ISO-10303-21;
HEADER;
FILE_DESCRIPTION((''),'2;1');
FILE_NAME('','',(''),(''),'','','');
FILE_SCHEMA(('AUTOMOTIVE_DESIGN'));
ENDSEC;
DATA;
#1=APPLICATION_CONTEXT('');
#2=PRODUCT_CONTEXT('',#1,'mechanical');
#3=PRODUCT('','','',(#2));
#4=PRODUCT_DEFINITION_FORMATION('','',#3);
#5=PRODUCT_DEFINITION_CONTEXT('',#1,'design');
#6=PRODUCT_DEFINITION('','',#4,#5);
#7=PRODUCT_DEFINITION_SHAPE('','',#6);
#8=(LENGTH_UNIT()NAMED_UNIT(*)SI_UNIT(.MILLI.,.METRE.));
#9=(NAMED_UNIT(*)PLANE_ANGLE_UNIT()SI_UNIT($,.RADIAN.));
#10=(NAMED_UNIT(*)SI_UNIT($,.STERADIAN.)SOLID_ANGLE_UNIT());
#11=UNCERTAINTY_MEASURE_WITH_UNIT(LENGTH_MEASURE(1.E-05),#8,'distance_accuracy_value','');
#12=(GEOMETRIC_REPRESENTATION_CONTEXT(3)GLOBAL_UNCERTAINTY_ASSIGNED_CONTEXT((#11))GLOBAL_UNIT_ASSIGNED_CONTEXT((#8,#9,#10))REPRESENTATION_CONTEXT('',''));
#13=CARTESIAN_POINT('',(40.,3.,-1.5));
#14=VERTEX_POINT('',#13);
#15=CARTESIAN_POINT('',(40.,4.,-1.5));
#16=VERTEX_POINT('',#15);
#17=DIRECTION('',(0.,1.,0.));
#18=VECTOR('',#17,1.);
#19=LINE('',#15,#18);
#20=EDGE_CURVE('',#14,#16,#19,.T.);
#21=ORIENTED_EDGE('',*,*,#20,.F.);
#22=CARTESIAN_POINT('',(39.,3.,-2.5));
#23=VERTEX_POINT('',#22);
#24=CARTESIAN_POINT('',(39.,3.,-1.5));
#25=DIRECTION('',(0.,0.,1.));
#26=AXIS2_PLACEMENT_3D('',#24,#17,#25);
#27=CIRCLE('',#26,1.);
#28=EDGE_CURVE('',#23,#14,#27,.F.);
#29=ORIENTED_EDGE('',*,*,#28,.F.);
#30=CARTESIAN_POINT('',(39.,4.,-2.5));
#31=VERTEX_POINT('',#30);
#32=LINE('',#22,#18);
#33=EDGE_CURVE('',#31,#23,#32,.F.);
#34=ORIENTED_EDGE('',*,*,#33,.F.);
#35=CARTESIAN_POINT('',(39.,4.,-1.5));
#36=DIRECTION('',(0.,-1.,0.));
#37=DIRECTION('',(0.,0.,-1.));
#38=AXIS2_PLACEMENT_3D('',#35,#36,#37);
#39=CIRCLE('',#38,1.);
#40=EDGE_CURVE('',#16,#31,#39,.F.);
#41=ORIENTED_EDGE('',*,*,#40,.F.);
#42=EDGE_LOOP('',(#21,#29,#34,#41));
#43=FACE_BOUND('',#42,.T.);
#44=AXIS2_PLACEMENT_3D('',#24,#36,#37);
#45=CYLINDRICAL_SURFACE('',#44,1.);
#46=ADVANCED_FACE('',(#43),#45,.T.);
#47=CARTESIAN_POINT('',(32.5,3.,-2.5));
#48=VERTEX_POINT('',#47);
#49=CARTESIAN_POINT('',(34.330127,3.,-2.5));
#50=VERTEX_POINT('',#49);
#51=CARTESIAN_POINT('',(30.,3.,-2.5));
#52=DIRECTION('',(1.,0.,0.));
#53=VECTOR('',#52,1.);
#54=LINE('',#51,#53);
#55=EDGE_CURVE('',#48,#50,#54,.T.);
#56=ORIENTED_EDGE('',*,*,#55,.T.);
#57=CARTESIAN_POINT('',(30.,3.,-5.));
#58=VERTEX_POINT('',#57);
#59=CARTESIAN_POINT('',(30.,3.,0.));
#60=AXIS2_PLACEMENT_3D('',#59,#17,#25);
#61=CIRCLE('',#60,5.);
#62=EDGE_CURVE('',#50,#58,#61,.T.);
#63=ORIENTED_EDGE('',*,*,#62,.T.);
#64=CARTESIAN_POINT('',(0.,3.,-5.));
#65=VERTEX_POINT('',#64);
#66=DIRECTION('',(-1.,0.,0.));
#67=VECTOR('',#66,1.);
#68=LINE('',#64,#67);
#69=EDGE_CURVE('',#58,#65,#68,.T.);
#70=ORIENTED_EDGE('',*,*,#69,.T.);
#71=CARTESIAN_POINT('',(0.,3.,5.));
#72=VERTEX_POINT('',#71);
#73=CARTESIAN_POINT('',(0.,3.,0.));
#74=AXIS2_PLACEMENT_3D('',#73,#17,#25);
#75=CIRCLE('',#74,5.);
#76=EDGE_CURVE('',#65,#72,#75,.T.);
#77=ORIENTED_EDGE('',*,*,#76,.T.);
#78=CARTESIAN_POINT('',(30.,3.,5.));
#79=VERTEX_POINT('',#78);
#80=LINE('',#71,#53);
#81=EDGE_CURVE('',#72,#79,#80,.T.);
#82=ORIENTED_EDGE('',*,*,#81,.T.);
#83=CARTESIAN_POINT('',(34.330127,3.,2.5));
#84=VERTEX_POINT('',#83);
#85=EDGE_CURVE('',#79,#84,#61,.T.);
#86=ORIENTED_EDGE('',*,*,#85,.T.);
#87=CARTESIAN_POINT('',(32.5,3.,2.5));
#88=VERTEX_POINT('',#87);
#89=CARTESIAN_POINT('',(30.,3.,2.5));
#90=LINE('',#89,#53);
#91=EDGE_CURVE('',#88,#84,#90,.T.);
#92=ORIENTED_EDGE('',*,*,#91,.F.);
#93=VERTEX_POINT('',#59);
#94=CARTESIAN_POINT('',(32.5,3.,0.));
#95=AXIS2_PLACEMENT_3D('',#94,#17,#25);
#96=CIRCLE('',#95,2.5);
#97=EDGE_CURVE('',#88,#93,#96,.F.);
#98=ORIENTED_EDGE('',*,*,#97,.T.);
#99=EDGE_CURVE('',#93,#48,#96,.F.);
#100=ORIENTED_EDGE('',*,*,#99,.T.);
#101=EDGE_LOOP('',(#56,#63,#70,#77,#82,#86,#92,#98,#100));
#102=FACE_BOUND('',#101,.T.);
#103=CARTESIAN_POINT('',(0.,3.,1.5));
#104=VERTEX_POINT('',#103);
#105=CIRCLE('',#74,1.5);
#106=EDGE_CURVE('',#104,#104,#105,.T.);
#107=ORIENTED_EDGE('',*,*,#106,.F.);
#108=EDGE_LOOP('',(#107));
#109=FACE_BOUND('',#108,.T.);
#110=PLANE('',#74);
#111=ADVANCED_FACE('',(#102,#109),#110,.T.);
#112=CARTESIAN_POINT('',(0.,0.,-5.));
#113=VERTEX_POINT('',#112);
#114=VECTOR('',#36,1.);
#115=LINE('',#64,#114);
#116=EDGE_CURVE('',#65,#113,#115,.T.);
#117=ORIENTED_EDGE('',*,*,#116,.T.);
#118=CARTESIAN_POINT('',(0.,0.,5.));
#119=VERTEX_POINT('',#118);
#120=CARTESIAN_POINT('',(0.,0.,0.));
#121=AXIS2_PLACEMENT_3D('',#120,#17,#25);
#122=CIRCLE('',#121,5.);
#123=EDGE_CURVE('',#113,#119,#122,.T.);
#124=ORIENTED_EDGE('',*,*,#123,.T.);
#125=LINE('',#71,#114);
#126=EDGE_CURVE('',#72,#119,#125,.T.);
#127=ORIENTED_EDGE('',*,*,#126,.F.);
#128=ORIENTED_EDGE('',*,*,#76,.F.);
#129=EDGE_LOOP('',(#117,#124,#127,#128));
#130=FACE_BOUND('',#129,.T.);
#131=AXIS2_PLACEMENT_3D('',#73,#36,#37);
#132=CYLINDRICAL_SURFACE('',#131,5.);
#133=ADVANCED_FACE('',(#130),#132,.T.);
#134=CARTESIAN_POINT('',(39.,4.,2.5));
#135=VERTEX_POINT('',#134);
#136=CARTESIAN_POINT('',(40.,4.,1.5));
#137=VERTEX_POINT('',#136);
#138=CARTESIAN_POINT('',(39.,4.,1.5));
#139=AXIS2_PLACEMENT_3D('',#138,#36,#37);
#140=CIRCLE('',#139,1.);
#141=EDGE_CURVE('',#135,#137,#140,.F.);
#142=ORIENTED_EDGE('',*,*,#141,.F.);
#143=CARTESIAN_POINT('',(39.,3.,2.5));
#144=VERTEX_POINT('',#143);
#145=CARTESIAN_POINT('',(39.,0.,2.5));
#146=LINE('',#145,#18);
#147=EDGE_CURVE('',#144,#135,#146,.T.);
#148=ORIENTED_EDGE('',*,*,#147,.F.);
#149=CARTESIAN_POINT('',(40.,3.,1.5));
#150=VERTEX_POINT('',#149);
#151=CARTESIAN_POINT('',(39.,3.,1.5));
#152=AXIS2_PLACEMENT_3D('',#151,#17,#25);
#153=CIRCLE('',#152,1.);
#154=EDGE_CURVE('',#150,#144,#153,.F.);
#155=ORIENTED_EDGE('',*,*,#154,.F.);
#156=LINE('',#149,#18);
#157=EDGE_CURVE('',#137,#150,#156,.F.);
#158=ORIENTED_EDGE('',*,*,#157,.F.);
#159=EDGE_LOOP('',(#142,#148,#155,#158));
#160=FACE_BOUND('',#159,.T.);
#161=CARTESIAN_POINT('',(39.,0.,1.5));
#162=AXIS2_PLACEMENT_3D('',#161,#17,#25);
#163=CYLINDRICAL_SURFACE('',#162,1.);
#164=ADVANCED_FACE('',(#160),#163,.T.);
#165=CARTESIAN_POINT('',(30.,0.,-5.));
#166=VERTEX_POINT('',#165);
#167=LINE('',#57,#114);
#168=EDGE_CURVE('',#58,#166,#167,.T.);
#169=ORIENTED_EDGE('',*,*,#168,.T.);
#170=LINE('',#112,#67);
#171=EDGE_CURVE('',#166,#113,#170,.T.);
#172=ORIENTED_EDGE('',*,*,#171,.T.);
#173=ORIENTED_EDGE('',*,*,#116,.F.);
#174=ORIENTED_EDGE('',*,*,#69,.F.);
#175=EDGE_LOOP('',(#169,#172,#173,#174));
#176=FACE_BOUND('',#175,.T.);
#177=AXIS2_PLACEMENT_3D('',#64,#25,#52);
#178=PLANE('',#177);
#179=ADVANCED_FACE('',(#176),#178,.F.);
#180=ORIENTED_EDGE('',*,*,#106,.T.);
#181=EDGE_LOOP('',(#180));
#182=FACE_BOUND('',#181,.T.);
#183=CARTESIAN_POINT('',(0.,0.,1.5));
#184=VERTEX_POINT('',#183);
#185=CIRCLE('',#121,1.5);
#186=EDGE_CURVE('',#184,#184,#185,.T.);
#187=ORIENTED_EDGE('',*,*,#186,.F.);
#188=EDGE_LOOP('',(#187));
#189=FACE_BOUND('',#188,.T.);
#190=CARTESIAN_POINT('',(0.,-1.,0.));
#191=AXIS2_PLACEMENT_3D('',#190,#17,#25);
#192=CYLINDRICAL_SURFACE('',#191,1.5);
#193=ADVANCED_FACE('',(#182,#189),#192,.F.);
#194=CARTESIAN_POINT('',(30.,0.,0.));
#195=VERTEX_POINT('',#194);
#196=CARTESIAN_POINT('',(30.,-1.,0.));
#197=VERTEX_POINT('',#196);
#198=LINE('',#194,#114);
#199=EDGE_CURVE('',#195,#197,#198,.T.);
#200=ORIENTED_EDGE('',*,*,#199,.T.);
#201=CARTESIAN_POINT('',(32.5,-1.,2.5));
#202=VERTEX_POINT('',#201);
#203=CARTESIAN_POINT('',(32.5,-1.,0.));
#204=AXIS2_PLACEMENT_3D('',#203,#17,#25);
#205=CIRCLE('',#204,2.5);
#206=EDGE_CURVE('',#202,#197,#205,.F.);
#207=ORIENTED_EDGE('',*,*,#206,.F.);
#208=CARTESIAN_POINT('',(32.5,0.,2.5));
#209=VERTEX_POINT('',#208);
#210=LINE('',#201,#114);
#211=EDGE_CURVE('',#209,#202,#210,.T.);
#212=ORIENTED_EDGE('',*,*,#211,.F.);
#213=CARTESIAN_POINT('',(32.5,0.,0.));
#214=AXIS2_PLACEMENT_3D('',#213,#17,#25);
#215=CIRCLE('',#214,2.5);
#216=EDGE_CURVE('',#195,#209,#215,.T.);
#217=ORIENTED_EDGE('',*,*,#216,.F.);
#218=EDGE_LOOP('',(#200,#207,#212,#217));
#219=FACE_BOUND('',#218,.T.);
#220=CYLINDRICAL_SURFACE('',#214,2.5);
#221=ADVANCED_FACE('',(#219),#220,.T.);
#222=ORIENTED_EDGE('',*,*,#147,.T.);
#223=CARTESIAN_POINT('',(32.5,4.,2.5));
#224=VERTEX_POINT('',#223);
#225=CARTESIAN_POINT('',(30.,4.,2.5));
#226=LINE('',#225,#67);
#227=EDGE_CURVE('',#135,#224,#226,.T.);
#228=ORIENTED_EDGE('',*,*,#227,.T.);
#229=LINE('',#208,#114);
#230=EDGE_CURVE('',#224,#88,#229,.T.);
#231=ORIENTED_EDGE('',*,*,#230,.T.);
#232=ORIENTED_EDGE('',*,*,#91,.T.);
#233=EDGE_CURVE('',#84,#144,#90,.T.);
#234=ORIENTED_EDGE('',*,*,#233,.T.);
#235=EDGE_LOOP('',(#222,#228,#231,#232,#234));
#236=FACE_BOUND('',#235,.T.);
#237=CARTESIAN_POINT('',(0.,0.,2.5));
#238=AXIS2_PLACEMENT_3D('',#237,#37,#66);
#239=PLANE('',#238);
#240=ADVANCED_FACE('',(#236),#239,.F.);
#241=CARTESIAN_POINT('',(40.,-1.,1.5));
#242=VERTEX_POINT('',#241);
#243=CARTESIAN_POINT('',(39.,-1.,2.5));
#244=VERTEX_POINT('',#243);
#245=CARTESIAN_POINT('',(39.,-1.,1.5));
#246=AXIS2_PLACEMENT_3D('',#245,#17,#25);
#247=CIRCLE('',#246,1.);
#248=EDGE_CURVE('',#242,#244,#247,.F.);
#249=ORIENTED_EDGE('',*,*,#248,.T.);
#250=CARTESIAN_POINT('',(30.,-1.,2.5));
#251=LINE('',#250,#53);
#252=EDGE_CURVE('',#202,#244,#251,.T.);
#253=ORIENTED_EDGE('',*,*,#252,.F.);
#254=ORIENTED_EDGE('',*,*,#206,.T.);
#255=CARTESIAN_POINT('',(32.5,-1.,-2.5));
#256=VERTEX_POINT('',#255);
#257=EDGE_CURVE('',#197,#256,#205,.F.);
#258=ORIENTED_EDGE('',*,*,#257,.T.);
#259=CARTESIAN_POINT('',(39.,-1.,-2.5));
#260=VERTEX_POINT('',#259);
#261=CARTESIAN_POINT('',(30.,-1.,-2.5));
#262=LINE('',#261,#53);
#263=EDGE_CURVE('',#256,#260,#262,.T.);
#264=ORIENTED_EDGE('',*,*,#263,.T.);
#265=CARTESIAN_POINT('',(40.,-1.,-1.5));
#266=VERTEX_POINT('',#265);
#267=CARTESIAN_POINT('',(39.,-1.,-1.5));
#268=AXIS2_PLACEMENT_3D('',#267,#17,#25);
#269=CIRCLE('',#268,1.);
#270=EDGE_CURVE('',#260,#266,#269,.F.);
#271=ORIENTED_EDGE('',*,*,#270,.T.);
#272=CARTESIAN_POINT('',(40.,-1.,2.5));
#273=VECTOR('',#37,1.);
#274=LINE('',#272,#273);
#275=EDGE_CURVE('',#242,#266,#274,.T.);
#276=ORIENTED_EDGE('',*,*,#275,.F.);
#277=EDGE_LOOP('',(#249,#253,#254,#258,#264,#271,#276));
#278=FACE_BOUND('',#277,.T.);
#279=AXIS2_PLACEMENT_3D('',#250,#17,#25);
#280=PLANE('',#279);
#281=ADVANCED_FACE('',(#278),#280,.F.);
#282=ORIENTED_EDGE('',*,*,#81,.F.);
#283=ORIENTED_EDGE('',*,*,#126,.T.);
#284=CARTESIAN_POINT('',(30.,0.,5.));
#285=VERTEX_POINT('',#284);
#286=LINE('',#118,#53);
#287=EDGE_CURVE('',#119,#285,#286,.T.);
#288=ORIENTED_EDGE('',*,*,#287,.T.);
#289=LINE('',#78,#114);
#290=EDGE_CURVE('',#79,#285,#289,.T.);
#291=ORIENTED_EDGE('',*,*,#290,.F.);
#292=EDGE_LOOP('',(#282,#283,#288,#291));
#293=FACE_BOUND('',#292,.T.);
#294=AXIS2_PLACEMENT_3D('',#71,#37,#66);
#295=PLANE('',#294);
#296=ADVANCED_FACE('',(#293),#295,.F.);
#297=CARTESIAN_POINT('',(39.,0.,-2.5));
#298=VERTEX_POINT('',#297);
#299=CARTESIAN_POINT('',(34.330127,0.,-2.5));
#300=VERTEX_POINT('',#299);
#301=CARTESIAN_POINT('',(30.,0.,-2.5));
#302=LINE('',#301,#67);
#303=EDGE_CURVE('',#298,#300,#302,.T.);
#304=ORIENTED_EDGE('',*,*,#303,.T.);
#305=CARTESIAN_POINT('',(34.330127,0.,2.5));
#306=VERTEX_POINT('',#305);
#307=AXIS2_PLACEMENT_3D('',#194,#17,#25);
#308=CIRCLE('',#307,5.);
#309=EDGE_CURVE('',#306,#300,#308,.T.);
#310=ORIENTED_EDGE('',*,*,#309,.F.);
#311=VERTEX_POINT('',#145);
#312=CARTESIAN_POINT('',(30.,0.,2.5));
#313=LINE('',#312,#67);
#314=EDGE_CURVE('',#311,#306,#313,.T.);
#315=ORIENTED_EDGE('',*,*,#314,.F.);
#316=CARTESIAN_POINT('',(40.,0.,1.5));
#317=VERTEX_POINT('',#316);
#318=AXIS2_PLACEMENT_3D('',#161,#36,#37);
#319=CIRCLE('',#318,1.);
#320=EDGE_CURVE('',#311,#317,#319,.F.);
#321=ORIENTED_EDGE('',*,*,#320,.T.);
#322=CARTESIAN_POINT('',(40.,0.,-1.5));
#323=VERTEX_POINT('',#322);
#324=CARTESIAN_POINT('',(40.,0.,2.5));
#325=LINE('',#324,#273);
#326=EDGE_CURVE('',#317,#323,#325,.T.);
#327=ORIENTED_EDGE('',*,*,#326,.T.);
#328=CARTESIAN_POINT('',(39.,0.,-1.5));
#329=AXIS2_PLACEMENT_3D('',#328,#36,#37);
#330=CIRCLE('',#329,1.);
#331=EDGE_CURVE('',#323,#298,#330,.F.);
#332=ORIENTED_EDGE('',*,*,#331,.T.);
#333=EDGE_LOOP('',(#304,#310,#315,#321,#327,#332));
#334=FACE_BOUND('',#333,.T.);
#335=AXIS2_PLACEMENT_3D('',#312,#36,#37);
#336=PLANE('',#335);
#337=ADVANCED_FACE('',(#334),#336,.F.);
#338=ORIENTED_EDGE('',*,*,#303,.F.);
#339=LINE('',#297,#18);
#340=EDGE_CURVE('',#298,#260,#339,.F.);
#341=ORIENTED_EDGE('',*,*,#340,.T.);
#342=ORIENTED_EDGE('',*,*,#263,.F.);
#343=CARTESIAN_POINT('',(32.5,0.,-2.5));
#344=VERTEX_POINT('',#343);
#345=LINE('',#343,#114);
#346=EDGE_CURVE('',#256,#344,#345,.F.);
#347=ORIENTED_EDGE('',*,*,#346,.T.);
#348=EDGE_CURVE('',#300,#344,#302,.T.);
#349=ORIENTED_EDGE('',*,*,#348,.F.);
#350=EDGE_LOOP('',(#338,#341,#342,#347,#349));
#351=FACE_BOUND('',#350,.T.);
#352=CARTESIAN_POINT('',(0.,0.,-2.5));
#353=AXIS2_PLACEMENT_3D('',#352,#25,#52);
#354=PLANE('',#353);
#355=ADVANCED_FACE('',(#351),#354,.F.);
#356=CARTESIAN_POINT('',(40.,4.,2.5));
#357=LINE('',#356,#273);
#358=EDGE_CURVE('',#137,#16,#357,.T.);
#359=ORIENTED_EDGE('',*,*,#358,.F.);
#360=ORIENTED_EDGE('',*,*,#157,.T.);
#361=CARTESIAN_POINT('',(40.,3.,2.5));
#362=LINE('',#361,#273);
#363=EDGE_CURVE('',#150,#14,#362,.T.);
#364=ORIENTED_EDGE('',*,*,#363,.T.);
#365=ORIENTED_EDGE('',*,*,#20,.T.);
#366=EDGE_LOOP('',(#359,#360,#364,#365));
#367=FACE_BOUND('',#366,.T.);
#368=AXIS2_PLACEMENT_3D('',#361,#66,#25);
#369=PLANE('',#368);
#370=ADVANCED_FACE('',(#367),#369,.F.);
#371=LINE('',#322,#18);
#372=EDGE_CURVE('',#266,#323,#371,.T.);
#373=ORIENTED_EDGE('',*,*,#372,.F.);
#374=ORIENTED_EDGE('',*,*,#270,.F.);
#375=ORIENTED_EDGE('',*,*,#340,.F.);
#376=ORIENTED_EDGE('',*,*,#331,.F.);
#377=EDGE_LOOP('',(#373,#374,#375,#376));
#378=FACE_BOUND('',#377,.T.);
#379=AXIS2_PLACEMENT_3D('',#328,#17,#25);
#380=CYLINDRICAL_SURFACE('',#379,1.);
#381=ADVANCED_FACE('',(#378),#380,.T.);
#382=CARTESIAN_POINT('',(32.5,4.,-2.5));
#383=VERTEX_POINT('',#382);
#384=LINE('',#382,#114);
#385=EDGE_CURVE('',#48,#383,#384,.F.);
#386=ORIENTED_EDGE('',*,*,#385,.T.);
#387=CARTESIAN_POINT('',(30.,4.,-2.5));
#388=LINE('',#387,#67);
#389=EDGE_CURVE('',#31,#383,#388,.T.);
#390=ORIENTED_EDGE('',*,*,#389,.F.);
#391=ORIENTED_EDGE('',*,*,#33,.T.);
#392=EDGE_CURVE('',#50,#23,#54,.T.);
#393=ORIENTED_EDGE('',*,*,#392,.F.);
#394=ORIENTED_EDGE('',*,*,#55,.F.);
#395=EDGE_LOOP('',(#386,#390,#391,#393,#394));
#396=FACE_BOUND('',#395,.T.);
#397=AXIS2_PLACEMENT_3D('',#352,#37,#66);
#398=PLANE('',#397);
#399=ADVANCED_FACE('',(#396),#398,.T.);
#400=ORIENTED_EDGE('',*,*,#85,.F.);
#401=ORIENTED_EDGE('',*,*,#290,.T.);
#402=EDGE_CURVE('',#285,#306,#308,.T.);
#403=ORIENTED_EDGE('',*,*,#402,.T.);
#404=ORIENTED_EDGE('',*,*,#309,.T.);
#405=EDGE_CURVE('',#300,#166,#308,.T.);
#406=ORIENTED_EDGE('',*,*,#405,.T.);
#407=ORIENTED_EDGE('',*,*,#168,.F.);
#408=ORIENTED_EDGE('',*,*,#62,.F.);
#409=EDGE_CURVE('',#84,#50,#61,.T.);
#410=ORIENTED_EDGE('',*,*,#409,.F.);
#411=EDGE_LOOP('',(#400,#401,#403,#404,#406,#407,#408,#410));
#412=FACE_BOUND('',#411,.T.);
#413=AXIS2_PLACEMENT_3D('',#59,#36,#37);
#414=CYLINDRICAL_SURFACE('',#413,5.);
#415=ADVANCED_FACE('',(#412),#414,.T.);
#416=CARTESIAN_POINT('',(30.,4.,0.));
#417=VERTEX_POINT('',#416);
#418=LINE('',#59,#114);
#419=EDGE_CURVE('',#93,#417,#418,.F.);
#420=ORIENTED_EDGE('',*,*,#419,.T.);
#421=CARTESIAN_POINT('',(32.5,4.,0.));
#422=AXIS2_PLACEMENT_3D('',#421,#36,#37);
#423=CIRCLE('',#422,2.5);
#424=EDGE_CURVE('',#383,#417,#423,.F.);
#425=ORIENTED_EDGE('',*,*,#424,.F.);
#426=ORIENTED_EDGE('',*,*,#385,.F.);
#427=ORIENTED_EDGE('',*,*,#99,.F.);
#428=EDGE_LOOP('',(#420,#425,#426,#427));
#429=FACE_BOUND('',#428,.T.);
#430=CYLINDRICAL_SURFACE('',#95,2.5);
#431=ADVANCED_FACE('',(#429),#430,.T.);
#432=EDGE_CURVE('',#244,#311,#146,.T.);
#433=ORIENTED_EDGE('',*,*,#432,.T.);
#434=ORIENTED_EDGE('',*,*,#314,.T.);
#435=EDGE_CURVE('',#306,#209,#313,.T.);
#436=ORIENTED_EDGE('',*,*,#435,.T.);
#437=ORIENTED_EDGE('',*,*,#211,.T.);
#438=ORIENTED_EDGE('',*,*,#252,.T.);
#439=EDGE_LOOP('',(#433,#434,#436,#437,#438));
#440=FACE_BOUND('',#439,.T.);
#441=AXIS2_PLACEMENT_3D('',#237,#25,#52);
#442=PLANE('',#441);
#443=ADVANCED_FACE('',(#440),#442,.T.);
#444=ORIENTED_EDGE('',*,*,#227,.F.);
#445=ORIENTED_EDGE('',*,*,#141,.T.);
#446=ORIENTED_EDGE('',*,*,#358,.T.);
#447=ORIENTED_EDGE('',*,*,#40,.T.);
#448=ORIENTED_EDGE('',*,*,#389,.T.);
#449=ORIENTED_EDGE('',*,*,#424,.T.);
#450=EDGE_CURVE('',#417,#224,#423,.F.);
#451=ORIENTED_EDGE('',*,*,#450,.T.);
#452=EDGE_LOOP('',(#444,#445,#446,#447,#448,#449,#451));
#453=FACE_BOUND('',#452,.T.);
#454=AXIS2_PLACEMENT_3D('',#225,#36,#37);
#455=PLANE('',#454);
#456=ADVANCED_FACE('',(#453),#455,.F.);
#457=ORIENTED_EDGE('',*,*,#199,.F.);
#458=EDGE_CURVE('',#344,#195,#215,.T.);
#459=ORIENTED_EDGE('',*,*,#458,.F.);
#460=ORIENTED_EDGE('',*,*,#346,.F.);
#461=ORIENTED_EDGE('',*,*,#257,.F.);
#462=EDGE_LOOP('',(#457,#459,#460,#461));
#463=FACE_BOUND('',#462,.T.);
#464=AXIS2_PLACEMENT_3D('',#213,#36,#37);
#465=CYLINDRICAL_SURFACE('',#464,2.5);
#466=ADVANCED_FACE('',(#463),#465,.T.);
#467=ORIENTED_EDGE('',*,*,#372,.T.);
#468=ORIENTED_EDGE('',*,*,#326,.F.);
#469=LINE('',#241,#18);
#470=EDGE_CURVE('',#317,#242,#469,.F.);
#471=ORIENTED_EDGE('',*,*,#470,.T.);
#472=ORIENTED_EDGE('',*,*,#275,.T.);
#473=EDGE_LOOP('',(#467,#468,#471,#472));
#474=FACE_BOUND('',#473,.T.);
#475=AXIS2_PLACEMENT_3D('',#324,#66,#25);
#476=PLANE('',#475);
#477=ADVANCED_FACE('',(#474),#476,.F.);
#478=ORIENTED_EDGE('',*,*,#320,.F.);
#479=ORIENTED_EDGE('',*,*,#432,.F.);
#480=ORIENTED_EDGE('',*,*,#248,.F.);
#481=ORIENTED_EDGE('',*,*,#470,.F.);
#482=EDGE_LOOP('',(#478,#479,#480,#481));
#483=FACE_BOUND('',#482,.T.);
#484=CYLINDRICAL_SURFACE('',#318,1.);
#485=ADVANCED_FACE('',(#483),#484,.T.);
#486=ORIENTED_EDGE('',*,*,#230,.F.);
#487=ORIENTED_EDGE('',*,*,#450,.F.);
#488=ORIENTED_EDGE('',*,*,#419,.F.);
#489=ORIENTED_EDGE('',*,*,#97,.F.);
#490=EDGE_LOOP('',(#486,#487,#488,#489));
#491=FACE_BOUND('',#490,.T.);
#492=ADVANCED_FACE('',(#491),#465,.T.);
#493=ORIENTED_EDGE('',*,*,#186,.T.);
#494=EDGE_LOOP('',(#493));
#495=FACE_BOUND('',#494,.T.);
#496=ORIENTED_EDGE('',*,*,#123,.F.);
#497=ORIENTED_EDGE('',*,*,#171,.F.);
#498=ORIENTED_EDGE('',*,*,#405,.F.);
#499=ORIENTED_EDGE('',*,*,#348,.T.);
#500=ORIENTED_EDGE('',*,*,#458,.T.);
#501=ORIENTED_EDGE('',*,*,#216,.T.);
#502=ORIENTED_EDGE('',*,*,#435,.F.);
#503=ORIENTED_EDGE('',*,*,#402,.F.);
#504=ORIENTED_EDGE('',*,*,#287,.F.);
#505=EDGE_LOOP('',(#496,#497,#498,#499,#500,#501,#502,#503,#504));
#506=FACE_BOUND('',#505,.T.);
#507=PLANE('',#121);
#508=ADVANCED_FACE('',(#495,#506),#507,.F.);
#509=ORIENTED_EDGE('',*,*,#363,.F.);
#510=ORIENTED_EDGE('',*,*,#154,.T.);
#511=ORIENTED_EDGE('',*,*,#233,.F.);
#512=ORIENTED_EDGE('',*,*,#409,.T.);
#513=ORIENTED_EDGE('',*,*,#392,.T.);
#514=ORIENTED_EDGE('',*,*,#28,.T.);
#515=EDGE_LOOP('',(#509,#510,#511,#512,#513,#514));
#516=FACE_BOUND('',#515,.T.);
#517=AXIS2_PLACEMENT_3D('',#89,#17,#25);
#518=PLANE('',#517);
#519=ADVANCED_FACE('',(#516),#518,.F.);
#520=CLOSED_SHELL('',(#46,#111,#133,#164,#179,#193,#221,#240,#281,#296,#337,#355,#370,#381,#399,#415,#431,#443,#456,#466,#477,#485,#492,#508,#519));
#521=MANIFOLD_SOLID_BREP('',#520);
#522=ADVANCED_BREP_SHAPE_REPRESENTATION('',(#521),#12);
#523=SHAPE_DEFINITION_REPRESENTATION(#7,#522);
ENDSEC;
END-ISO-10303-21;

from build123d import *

# Parameters (mm, degrees)
BOSS_EXTRUDE1_DEPTH = 3
SKETCH5_W           = 10
SKETCH5_H           = 1
BOSS_EXTRUDE2_DEPTH = 2.5
FILLET1_R           = 2.5
FILLET2_R           = 1
SKETCH6_R           = 1.5
CUT_EXTRUDE1_DEPTH  = 41.509258201


with BuildPart() as part:
    # Sketch2 → Boss-Extrude1 (new body)
    with BuildSketch(Plane(origin=(0, 0, 0), x_dir=(1, 0, 0), z_dir=(0, 1, 0))):
        with BuildLine():
            Line((0, 5), (30, 5))
            ThreePointArc((30, 5), (35, 0), (30, -5))
            Line((30, -5), (0, -5))
            ThreePointArc((0, -5), (-5, 0), (0, 5))
        make_face()
    extrude(amount=BOSS_EXTRUDE1_DEPTH)

    # Sketch5 → Boss-Extrude2 (add, symmetric)
    with BuildSketch(Plane.XY):
        with Locations((35, 3.5)):
            Rectangle(SKETCH5_W, SKETCH5_H)
        with Locations((35, -0.5)):
            Rectangle(SKETCH5_W, SKETCH5_H)
    extrude(amount=BOSS_EXTRUDE2_DEPTH, both=True)

    # Fillet1
    fillet1_edges = [part.edges().sort_by_distance(p)[0] for p in [
        (30, -0.5, 2.5),
        (30, -0.5, -2.5),
        (30, 3.5, -2.5),
        (30, 3.5, 2.5),
    ]]
    fillet(fillet1_edges, radius=FILLET1_R - 0.0001)  # a hair under: the kernel refuses the full size

    # Fillet2
    fillet2_edges = [part.edges().sort_by_distance(p)[0] for p in [
        (40, 3.5, -2.5),
        (40, 3.5, 2.5),
        (40, -0.5, -2.5),
        (40, -0.5, 2.5),
    ]]
    fillet(fillet2_edges, radius=FILLET2_R)

    # Sketch6 → Cut-Extrude1 (cut, through all)
    with BuildSketch(Plane(origin=(0, 3, 0), x_dir=(1, 0, 0), z_dir=(0, 1, 0))):
        with Locations(Location((0, 0, 0), (0, 0, 270))):
            Circle(SKETCH6_R)
    extrude(amount=-CUT_EXTRUDE1_DEPTH, mode=Mode.SUBTRACT)


solid = part.part
